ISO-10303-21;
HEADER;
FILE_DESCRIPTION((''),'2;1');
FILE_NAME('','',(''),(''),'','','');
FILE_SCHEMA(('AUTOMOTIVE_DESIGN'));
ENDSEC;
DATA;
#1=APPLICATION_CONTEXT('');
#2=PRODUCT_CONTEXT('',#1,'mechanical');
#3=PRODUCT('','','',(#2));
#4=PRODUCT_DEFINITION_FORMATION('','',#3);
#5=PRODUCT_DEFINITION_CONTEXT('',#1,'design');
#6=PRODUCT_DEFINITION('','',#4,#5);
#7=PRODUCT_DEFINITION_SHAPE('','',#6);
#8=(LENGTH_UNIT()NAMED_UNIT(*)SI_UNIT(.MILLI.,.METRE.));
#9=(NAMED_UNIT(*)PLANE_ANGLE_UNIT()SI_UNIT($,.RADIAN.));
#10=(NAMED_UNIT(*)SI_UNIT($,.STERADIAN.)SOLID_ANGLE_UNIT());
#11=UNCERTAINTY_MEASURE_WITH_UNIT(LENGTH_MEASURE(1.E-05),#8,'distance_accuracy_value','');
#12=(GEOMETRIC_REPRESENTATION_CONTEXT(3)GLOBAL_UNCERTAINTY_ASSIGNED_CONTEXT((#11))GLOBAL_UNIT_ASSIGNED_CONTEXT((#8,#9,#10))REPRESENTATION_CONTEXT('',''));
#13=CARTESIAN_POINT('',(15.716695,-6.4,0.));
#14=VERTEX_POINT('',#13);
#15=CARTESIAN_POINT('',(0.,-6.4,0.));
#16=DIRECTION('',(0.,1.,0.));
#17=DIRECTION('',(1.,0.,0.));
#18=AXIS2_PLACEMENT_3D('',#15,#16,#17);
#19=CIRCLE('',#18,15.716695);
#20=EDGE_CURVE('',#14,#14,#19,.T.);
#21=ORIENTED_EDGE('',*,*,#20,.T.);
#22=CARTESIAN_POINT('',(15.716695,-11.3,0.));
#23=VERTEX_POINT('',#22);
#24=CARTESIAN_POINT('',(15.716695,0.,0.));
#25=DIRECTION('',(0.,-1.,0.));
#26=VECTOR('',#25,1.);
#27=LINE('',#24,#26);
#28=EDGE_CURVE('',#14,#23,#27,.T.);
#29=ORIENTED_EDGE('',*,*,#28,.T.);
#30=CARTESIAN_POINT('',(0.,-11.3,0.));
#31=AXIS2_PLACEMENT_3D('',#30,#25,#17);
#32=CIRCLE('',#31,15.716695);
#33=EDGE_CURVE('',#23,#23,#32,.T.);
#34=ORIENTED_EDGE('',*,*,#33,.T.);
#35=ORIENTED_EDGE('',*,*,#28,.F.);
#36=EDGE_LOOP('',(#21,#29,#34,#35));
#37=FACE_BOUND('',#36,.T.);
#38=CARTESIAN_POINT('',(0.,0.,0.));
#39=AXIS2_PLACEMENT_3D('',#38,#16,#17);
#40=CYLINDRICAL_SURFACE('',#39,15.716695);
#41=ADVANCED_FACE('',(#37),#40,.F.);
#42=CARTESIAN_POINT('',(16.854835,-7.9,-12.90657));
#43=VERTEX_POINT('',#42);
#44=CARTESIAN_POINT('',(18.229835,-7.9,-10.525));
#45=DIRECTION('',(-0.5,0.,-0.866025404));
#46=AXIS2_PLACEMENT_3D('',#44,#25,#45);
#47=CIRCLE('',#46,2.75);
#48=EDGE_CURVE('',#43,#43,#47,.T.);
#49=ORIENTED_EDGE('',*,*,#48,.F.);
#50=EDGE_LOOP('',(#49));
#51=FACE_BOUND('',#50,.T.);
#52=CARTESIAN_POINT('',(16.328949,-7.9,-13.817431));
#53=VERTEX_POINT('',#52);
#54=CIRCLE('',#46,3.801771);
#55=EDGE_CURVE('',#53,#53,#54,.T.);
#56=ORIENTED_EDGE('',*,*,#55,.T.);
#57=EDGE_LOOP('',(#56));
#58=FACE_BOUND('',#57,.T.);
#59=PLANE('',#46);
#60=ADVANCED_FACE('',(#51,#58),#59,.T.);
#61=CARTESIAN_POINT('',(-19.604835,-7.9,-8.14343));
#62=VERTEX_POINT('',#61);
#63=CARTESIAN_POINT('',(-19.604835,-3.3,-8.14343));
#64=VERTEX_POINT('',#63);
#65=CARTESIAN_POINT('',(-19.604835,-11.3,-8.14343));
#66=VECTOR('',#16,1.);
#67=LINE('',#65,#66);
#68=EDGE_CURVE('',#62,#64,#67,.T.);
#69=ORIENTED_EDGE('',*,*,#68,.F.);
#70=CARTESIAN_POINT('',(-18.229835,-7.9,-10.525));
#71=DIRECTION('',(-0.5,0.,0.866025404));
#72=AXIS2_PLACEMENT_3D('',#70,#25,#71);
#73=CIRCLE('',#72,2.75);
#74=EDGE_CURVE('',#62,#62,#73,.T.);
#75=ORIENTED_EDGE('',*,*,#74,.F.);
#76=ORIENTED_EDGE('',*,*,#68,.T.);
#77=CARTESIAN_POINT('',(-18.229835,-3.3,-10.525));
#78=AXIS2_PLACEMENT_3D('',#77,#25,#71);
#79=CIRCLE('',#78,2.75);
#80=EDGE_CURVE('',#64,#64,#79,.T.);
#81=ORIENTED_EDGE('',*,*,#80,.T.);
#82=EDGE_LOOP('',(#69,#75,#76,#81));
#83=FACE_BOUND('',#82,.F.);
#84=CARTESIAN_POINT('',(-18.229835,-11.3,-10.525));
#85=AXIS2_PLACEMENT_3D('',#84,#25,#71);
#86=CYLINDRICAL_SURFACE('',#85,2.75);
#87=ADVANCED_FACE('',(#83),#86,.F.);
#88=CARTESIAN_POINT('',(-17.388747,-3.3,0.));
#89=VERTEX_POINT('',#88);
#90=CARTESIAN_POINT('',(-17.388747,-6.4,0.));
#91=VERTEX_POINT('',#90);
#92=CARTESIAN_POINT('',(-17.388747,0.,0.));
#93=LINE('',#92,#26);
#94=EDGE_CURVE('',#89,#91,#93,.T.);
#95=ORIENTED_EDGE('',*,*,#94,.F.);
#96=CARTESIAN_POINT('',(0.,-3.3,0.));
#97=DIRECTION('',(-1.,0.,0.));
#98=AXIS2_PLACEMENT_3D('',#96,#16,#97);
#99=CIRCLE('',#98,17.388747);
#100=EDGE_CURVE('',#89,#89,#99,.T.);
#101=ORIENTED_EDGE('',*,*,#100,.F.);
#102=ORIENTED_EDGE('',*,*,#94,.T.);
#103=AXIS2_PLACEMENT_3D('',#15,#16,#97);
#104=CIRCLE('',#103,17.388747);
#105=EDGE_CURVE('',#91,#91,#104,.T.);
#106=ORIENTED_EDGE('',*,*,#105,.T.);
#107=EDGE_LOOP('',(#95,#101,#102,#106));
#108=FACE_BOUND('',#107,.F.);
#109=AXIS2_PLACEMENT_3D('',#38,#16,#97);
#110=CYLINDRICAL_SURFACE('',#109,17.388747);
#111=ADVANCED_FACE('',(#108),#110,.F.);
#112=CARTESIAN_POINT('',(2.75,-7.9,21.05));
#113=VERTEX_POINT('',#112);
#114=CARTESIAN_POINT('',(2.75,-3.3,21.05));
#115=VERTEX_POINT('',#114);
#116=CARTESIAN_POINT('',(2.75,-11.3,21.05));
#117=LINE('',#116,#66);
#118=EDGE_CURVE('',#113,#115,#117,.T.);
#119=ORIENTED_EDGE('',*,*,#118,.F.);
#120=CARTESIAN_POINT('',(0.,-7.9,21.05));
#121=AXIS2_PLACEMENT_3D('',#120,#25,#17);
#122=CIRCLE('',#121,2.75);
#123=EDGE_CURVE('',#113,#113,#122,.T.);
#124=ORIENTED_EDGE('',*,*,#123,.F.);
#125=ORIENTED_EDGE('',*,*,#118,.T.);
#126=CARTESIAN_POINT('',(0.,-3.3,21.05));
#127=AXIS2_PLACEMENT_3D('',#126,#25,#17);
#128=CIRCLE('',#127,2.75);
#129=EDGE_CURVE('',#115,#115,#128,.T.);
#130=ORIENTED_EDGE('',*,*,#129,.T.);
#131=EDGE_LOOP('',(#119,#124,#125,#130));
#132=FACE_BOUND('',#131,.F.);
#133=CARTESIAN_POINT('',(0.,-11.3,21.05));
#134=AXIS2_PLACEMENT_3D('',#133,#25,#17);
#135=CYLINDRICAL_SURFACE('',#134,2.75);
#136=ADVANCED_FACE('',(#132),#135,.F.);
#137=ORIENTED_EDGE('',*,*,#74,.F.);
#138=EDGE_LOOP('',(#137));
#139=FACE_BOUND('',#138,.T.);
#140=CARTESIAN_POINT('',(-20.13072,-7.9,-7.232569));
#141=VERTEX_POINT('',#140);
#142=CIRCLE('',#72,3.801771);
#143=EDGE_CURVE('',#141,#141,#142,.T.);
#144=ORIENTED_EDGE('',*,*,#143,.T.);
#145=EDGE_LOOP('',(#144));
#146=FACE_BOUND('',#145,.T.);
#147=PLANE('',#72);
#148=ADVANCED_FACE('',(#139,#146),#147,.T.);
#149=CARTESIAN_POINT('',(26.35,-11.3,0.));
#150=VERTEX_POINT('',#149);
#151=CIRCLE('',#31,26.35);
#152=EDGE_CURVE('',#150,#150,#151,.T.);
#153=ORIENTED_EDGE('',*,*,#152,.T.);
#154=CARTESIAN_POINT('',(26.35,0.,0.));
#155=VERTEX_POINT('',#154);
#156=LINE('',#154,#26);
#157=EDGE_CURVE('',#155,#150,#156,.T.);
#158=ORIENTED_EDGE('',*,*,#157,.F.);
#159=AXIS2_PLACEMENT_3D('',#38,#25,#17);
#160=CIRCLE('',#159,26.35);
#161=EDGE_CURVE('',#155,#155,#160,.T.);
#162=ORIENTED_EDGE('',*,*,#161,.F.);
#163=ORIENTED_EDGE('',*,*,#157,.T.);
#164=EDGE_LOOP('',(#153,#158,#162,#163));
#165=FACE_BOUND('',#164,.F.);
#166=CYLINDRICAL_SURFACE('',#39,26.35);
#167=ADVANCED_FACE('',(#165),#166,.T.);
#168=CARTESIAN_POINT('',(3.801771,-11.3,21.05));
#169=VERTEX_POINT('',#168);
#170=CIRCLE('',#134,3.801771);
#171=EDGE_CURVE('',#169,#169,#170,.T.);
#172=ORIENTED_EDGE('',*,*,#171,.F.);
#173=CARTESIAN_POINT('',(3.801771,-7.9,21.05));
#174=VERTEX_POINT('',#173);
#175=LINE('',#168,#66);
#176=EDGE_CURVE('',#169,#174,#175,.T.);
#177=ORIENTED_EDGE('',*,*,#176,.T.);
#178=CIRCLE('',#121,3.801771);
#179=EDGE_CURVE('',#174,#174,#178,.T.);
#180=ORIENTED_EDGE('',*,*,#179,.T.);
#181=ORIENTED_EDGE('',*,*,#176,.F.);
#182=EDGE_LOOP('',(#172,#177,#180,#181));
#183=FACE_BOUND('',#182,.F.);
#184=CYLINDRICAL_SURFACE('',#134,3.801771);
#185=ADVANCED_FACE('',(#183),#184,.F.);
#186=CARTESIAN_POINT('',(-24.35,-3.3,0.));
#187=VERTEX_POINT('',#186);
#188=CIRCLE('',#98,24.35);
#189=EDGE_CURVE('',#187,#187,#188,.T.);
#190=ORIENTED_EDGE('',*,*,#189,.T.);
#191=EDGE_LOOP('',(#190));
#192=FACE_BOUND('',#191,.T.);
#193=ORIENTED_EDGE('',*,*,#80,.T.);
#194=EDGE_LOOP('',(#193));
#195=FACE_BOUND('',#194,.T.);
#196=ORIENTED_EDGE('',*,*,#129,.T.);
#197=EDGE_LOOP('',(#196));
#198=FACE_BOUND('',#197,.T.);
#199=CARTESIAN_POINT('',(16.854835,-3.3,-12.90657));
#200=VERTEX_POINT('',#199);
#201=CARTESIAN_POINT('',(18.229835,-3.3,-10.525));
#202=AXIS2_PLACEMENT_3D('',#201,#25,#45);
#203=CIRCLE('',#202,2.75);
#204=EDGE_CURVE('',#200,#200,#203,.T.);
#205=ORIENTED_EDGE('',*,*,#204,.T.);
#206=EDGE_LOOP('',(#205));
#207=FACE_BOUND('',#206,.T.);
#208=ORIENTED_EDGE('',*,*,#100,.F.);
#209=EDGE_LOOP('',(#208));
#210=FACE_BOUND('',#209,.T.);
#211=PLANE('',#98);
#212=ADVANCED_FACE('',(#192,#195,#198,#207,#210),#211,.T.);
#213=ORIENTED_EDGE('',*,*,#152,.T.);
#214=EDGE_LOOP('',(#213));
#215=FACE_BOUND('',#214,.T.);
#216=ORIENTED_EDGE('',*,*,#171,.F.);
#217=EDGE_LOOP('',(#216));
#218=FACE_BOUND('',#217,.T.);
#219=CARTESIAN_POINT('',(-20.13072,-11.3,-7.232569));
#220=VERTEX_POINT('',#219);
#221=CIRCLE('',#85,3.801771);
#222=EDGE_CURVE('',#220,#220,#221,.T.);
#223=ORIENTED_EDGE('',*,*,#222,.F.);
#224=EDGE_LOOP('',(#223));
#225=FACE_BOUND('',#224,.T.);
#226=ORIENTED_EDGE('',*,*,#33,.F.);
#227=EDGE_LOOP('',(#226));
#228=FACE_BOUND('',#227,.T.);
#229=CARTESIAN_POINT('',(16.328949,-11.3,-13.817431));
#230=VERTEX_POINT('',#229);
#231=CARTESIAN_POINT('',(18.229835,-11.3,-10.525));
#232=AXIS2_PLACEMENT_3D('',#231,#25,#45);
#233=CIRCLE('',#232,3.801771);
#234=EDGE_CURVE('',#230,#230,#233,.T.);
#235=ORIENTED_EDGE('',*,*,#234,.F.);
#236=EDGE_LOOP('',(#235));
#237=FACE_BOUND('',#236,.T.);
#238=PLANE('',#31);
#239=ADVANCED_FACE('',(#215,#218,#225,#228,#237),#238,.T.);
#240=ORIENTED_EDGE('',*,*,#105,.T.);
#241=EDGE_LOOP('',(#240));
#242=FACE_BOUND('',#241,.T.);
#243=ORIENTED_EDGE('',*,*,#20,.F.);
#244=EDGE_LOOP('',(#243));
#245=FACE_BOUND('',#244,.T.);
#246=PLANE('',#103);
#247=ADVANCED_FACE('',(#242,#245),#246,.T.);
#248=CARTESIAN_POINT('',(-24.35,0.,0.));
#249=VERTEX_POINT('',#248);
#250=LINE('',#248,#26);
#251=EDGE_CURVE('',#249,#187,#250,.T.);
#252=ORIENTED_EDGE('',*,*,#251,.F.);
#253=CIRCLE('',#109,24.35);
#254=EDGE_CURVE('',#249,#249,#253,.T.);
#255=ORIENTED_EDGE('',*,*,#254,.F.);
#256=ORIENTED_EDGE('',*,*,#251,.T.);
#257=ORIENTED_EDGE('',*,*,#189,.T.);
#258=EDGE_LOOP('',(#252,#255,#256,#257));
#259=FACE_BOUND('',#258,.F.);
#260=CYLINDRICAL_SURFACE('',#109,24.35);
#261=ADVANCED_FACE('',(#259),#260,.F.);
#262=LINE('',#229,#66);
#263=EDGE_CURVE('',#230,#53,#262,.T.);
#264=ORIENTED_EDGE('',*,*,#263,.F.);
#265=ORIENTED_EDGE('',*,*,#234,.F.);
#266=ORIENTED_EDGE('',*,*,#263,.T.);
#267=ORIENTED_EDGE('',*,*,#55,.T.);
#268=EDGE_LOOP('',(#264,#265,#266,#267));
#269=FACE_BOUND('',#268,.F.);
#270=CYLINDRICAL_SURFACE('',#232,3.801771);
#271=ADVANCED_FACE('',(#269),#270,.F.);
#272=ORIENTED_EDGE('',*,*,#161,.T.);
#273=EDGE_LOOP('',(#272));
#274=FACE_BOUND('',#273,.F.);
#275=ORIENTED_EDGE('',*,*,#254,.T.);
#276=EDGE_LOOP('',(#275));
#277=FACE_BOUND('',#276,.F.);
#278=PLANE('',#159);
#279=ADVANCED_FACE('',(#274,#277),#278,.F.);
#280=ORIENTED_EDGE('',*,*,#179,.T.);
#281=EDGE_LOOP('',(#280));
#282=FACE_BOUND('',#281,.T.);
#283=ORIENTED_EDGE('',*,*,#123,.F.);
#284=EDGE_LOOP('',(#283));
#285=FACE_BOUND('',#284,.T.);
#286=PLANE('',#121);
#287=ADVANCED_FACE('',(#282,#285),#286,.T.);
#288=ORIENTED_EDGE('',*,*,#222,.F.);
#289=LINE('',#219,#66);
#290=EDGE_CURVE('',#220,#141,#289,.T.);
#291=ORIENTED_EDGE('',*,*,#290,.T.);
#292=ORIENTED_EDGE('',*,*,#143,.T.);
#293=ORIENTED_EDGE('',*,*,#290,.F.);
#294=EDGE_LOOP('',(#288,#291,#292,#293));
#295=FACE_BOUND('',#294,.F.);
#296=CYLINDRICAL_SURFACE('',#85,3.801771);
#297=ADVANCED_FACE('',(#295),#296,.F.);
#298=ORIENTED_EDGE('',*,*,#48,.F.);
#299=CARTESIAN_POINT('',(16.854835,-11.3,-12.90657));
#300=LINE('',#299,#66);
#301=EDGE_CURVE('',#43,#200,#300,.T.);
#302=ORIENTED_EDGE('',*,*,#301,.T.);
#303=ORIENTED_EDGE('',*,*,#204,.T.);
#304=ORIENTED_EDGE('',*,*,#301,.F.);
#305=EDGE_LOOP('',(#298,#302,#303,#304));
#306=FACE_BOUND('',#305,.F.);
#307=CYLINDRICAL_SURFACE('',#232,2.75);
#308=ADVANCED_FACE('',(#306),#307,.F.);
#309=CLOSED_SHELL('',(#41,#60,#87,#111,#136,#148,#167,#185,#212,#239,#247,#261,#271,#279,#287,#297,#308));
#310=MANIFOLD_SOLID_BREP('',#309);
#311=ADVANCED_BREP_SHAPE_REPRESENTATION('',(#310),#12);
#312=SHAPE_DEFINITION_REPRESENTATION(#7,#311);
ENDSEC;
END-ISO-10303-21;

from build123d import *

# Parameters (mm, degrees)
F0_R            = 26.35
F0_R_2          = 15.7166947943
F1_DEPTH        = 11.3
F2_R            = 17.3887467131
F2_R_2          = 15.7166947943
F3_DEPTH        = 6.4
F4_R            = 24.35
F4_R_2          = 17.3887467131
F5_DEPTH        = 3.3
F6_R            = 3.8017714644
F6_R_2          = 2.75
F7_DEPTH        = 3.4
F7_COPIES_COUNT = 3
F8_DEPTH        = 10
F8_COPIES_COUNT = 3


# Not quite as in the source:
# - a feature of the source that left no trace in its solid (it failed there, or was rolled back) is left out
# - a pattern or mirror of a feature is missing from the dataset's text; its kind, count and spacing are read off the source's solid


with BuildPart() as f1:
    # F0 (on Front) → F1 (new body)
    with BuildSketch(Plane.XZ):
        Circle(F0_R)
        Circle(F0_R_2, mode=Mode.SUBTRACT)
    extrude(amount=F1_DEPTH)

    # F2 (on face) → F3 (cut)
    with BuildSketch(Plane(origin=(0, 0, 0), x_dir=(-1, 0, 0), z_dir=(0, 1, 0))):
        Circle(F2_R)
        Circle(F2_R_2, mode=Mode.SUBTRACT)
    extrude(amount=-F3_DEPTH, mode=Mode.SUBTRACT)

    # F4 (on face) → F5 (cut)
    with BuildSketch(Plane(origin=(0, 0, 0), x_dir=(-1, 0, 0), z_dir=(0, 1, 0))):
        Circle(F4_R)
        Circle(F4_R_2, mode=Mode.SUBTRACT)
    extrude(amount=-F5_DEPTH, mode=Mode.SUBTRACT)

    # F6 (on face) → F7 (cut)
    with BuildSketch(Plane.XZ.offset(11.3)):
        with Locations((0, 21.05)):
            Circle(F6_R)
        with Locations((0, 21.05)):
            Circle(F6_R_2, mode=Mode.SUBTRACT)
    f7 = extrude(amount=-F7_DEPTH, mode=Mode.SUBTRACT)

    # F7_copies: F7 ×3 about axis
    f7_copies_axis = Axis((0, 0, 0), (0, 1, 0))
    for i in range(1, F7_COPIES_COUNT):
        add(f7.rotate(f7_copies_axis, i * 360 / F7_COPIES_COUNT), mode=Mode.SUBTRACT)

    # F8 (cut): a face of the model
    f8_faces = [f1.faces().sort_by_distance(p)[0] for p in [
        (0, -11.3, 21.05),
    ]]
    f8 = extrude(f8_faces, amount=-F8_DEPTH, mode=Mode.SUBTRACT)

    # F8_copies: F8 ×3 about axis
    f8_copies_axis = Axis((0, 0, 0), (0, 1, 0))
    for i in range(1, F8_COPIES_COUNT):
        add(f8.rotate(f8_copies_axis, i * 360 / F8_COPIES_COUNT), mode=Mode.SUBTRACT)


solid = f1.part
